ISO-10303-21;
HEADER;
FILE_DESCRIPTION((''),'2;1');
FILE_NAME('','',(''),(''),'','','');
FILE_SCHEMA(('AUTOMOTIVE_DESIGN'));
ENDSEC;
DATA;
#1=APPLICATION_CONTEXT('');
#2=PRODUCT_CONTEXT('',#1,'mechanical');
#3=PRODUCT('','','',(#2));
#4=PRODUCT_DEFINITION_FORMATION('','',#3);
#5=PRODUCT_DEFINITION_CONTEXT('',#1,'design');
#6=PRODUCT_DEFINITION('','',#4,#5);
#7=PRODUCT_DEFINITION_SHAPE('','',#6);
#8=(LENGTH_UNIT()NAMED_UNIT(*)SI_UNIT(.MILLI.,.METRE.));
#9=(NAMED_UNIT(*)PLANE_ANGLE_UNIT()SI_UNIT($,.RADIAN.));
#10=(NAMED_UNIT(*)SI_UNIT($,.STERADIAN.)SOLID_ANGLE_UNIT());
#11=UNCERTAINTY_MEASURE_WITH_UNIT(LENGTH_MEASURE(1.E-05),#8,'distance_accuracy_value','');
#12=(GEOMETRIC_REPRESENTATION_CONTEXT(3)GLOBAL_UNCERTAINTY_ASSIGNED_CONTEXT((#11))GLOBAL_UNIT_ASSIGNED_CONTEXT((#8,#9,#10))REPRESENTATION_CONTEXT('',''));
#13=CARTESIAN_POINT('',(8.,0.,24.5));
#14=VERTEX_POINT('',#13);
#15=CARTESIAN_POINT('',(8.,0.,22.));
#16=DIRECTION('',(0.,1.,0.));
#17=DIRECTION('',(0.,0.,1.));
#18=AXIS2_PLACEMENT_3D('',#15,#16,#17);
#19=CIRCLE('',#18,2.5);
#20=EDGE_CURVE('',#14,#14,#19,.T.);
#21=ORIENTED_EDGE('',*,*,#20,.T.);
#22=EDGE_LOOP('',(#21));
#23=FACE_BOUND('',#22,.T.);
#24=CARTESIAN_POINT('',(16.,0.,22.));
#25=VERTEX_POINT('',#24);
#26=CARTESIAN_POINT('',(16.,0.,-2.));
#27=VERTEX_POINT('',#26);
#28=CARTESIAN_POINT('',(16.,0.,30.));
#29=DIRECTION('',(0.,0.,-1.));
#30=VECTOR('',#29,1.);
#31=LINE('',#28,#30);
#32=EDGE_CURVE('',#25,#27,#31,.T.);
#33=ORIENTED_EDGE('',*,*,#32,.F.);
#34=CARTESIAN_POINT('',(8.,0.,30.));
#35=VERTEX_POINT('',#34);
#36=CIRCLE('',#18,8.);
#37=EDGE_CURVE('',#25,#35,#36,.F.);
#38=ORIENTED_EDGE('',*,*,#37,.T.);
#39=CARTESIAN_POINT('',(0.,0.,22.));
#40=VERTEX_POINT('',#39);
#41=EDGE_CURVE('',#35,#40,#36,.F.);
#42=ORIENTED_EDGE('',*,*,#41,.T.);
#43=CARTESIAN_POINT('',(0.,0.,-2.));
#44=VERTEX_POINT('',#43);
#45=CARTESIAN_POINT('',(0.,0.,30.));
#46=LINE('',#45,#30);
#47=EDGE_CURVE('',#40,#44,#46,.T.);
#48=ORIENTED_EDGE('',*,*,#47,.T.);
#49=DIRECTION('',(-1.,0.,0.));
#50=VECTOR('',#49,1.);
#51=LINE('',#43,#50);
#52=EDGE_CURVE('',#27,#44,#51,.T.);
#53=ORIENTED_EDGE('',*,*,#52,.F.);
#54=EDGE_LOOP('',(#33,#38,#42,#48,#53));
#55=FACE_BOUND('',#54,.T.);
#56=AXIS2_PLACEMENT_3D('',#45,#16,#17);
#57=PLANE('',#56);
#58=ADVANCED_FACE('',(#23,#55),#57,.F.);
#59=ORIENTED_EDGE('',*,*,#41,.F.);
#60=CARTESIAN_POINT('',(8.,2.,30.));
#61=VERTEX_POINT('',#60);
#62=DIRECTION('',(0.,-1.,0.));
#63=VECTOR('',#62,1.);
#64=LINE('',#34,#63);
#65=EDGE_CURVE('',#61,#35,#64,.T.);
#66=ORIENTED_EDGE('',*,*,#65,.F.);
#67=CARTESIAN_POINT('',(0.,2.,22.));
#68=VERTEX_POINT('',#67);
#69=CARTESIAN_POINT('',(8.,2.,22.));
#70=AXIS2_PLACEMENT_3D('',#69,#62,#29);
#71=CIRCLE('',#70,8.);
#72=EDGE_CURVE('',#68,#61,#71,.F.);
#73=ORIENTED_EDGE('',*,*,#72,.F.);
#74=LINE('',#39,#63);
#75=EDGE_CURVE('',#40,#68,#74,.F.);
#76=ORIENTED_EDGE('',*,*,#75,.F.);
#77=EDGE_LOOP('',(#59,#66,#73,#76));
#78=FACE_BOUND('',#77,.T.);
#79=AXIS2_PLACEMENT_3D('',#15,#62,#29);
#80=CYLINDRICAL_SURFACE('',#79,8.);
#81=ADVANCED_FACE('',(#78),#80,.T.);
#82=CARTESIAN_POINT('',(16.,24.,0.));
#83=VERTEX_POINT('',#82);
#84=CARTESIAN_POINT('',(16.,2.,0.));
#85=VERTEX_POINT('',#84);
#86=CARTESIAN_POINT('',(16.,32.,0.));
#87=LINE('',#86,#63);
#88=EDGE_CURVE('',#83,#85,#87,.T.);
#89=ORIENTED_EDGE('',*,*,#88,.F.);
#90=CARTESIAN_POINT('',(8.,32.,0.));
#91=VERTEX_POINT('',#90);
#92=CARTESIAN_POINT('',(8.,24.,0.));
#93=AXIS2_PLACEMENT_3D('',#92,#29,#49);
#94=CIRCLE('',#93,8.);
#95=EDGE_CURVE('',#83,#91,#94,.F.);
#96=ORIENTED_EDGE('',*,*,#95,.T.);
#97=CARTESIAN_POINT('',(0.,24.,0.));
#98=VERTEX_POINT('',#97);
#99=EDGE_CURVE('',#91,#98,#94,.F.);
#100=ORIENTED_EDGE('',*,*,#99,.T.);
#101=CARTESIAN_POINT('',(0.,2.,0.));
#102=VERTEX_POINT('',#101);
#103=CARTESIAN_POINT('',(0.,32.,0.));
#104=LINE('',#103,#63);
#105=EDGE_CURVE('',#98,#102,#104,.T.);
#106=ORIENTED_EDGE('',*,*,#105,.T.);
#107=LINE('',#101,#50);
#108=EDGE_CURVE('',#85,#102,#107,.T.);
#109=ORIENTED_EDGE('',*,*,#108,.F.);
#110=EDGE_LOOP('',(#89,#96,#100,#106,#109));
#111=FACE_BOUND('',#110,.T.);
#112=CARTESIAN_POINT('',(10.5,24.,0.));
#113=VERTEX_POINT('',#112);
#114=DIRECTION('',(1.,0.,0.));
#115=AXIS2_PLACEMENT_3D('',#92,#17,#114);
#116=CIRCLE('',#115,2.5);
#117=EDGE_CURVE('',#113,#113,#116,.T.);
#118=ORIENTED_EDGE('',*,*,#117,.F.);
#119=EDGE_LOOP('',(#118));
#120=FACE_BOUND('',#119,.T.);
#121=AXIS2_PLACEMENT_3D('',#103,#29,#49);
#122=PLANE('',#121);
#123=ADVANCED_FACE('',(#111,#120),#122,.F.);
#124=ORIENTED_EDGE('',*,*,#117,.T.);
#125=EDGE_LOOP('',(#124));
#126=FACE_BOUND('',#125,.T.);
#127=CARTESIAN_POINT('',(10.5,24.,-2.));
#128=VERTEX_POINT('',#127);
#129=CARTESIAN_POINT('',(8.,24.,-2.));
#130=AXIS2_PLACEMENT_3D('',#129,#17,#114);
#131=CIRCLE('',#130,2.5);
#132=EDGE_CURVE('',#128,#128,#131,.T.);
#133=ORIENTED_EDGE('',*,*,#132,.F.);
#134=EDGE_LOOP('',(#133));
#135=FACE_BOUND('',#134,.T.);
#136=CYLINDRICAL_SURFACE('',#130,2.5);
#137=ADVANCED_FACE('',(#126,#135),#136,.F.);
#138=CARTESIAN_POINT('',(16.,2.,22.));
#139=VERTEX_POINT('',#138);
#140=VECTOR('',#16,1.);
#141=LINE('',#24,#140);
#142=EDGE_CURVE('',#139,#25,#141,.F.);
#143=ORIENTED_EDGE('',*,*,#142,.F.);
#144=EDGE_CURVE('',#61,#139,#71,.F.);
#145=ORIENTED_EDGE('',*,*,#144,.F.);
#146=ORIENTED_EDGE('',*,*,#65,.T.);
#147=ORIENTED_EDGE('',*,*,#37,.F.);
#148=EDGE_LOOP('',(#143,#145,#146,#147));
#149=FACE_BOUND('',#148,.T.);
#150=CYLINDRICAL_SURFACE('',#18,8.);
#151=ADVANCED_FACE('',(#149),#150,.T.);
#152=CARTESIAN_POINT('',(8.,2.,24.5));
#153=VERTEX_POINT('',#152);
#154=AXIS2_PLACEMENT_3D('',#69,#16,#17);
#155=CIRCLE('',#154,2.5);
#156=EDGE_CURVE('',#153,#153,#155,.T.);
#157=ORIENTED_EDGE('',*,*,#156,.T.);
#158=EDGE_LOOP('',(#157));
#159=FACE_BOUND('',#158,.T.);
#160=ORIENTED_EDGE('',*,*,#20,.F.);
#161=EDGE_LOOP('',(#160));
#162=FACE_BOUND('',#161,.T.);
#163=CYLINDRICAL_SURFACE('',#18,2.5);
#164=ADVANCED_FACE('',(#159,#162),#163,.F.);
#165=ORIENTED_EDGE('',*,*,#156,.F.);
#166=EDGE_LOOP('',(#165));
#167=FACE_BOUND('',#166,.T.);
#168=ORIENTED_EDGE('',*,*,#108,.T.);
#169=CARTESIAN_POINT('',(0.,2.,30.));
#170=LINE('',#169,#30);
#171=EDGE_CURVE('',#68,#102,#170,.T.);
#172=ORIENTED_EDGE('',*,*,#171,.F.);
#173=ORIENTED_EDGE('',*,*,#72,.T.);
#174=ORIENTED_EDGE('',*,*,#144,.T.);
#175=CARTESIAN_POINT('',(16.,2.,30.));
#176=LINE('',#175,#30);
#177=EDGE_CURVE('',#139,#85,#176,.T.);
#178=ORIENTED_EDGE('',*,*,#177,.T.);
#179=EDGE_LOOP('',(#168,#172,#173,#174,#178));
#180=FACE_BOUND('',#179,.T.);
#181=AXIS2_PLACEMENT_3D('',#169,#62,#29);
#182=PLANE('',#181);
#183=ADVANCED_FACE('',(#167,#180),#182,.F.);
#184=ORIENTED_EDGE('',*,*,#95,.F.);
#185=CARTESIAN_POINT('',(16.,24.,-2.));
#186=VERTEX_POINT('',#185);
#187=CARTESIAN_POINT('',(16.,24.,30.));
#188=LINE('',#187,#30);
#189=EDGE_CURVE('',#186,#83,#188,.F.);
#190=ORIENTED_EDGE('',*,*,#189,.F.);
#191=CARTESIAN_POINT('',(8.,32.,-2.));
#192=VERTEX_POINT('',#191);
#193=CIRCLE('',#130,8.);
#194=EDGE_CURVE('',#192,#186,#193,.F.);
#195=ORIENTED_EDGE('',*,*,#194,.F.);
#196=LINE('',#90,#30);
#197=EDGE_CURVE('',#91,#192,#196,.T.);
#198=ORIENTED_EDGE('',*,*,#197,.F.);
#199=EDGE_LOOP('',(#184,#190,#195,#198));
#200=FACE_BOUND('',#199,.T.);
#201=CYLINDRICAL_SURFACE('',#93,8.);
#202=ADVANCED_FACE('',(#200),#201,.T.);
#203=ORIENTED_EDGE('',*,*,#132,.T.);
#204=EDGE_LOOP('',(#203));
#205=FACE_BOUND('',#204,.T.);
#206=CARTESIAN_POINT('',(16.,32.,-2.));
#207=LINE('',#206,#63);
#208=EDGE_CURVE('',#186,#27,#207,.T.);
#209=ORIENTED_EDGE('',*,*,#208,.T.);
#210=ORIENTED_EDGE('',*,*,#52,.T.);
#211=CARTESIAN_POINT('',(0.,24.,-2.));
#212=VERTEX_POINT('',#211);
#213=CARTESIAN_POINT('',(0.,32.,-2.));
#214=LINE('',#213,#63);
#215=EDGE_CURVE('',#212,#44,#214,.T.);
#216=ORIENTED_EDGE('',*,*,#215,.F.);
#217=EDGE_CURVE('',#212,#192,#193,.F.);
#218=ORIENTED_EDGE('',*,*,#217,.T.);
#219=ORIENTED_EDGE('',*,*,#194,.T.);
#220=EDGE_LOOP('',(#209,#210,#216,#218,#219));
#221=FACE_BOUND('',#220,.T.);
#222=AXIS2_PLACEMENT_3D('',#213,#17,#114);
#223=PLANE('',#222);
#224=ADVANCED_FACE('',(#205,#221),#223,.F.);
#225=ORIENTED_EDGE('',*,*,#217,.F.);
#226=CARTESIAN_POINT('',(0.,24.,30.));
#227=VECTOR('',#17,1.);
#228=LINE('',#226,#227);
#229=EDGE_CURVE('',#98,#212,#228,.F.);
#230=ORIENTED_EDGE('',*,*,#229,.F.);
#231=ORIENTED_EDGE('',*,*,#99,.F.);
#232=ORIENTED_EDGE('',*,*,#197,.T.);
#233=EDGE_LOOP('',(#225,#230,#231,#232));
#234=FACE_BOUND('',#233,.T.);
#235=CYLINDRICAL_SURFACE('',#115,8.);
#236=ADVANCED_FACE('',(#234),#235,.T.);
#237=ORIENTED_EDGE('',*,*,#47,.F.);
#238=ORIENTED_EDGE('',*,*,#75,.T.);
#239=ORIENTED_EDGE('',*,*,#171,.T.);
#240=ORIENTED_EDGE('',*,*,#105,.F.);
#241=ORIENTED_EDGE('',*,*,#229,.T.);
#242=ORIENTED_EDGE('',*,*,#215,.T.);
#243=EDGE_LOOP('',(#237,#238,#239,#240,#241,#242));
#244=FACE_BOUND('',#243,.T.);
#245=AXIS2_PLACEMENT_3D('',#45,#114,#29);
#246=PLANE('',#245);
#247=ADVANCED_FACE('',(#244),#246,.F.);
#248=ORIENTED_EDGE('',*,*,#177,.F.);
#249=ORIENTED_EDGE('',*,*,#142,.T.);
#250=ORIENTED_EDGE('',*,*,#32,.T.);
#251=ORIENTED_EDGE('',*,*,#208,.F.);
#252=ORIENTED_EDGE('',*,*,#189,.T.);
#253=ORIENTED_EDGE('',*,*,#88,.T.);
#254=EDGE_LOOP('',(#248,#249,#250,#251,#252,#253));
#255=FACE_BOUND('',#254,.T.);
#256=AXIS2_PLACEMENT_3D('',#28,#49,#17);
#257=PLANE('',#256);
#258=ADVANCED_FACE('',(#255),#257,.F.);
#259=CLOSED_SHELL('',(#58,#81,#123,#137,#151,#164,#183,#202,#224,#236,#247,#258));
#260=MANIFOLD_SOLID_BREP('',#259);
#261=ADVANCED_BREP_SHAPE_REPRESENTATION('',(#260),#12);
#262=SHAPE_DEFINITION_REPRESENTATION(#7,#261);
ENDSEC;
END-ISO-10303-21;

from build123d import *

# Parameters (mm, degrees)
SKETCH_1_W          = 16
SKETCH_1_H          = 2
EXTRUDE_1_DEPTH     = 30
FILLET_1_R          = 8
FILLET_2_R          = 8
SKETCH_2_W          = 16
SKETCH_2_H          = 2
EXTRUDE_2_DEPTH     = 32
FILLET_3_R          = 8
FILLET_4_R          = 8
SKETCH_4_R          = 2.5
CUT_EXTRUDE_2_DEPTH = 2
SKETCH_3_R          = 2.5
CUT_EXTRUDE_3_DEPTH = 2


with BuildPart() as part:
    # 草图1 → 凸台-拉伸1 (new body)
    with BuildSketch(Plane.XY):
        with Locations((8, 1)):
            Rectangle(SKETCH_1_W, SKETCH_1_H)
    extrude(amount=EXTRUDE_1_DEPTH)

    # 圆角1
    fillet_1_edges = [part.edges().sort_by_distance(p)[0] for p in [
        (0, 1, 30),
    ]]
    fillet(fillet_1_edges, radius=FILLET_1_R)

    # 圆角2
    fillet_2_edges = [part.edges().sort_by_distance(p)[0] for p in [
        (16, 1, 30),
    ]]
    fillet(fillet_2_edges, radius=FILLET_2_R - 0.0001)  # a hair under: the kernel refuses the full size

    # 草图2 → 凸台-拉伸2 (add)
    with BuildSketch(Plane(origin=(0, 0, 0), x_dir=(1, 0, 0), z_dir=(0, 1, 0))):
        with Locations((8, 1)):
            Rectangle(SKETCH_2_W, SKETCH_2_H)
    extrude(amount=EXTRUDE_2_DEPTH)

    # 圆角3
    fillet_3_edges = [part.edges().sort_by_distance(p)[0] for p in [
        (16, 32, -1),
    ]]
    fillet(fillet_3_edges, radius=FILLET_3_R)

    # 圆角4
    fillet_4_edges = [part.edges().sort_by_distance(p)[0] for p in [
        (0, 32, -1),
    ]]
    fillet(fillet_4_edges, radius=FILLET_4_R - 0.0001)  # a hair under: the kernel refuses the full size

    # 草图4 → 切除-拉伸2 (cut)
    with BuildSketch(Plane(origin=(0, 2, 0), x_dir=(1, 0, 0), z_dir=(0, 1, 0))):
        with Locations(Location((8, -22, 0), (0, 0, 270))):
            Circle(SKETCH_4_R)
    extrude(amount=-CUT_EXTRUDE_2_DEPTH, mode=Mode.SUBTRACT)

    # 草图3 → 切除-拉伸3 (cut)
    with BuildSketch(Plane.XY):
        with Locations((8, 24)):
            Circle(SKETCH_3_R)
        with Locations((8, 40)):
            Circle(SKETCH_3_R)
    extrude(amount=-CUT_EXTRUDE_3_DEPTH, mode=Mode.SUBTRACT)


solid = part.part
